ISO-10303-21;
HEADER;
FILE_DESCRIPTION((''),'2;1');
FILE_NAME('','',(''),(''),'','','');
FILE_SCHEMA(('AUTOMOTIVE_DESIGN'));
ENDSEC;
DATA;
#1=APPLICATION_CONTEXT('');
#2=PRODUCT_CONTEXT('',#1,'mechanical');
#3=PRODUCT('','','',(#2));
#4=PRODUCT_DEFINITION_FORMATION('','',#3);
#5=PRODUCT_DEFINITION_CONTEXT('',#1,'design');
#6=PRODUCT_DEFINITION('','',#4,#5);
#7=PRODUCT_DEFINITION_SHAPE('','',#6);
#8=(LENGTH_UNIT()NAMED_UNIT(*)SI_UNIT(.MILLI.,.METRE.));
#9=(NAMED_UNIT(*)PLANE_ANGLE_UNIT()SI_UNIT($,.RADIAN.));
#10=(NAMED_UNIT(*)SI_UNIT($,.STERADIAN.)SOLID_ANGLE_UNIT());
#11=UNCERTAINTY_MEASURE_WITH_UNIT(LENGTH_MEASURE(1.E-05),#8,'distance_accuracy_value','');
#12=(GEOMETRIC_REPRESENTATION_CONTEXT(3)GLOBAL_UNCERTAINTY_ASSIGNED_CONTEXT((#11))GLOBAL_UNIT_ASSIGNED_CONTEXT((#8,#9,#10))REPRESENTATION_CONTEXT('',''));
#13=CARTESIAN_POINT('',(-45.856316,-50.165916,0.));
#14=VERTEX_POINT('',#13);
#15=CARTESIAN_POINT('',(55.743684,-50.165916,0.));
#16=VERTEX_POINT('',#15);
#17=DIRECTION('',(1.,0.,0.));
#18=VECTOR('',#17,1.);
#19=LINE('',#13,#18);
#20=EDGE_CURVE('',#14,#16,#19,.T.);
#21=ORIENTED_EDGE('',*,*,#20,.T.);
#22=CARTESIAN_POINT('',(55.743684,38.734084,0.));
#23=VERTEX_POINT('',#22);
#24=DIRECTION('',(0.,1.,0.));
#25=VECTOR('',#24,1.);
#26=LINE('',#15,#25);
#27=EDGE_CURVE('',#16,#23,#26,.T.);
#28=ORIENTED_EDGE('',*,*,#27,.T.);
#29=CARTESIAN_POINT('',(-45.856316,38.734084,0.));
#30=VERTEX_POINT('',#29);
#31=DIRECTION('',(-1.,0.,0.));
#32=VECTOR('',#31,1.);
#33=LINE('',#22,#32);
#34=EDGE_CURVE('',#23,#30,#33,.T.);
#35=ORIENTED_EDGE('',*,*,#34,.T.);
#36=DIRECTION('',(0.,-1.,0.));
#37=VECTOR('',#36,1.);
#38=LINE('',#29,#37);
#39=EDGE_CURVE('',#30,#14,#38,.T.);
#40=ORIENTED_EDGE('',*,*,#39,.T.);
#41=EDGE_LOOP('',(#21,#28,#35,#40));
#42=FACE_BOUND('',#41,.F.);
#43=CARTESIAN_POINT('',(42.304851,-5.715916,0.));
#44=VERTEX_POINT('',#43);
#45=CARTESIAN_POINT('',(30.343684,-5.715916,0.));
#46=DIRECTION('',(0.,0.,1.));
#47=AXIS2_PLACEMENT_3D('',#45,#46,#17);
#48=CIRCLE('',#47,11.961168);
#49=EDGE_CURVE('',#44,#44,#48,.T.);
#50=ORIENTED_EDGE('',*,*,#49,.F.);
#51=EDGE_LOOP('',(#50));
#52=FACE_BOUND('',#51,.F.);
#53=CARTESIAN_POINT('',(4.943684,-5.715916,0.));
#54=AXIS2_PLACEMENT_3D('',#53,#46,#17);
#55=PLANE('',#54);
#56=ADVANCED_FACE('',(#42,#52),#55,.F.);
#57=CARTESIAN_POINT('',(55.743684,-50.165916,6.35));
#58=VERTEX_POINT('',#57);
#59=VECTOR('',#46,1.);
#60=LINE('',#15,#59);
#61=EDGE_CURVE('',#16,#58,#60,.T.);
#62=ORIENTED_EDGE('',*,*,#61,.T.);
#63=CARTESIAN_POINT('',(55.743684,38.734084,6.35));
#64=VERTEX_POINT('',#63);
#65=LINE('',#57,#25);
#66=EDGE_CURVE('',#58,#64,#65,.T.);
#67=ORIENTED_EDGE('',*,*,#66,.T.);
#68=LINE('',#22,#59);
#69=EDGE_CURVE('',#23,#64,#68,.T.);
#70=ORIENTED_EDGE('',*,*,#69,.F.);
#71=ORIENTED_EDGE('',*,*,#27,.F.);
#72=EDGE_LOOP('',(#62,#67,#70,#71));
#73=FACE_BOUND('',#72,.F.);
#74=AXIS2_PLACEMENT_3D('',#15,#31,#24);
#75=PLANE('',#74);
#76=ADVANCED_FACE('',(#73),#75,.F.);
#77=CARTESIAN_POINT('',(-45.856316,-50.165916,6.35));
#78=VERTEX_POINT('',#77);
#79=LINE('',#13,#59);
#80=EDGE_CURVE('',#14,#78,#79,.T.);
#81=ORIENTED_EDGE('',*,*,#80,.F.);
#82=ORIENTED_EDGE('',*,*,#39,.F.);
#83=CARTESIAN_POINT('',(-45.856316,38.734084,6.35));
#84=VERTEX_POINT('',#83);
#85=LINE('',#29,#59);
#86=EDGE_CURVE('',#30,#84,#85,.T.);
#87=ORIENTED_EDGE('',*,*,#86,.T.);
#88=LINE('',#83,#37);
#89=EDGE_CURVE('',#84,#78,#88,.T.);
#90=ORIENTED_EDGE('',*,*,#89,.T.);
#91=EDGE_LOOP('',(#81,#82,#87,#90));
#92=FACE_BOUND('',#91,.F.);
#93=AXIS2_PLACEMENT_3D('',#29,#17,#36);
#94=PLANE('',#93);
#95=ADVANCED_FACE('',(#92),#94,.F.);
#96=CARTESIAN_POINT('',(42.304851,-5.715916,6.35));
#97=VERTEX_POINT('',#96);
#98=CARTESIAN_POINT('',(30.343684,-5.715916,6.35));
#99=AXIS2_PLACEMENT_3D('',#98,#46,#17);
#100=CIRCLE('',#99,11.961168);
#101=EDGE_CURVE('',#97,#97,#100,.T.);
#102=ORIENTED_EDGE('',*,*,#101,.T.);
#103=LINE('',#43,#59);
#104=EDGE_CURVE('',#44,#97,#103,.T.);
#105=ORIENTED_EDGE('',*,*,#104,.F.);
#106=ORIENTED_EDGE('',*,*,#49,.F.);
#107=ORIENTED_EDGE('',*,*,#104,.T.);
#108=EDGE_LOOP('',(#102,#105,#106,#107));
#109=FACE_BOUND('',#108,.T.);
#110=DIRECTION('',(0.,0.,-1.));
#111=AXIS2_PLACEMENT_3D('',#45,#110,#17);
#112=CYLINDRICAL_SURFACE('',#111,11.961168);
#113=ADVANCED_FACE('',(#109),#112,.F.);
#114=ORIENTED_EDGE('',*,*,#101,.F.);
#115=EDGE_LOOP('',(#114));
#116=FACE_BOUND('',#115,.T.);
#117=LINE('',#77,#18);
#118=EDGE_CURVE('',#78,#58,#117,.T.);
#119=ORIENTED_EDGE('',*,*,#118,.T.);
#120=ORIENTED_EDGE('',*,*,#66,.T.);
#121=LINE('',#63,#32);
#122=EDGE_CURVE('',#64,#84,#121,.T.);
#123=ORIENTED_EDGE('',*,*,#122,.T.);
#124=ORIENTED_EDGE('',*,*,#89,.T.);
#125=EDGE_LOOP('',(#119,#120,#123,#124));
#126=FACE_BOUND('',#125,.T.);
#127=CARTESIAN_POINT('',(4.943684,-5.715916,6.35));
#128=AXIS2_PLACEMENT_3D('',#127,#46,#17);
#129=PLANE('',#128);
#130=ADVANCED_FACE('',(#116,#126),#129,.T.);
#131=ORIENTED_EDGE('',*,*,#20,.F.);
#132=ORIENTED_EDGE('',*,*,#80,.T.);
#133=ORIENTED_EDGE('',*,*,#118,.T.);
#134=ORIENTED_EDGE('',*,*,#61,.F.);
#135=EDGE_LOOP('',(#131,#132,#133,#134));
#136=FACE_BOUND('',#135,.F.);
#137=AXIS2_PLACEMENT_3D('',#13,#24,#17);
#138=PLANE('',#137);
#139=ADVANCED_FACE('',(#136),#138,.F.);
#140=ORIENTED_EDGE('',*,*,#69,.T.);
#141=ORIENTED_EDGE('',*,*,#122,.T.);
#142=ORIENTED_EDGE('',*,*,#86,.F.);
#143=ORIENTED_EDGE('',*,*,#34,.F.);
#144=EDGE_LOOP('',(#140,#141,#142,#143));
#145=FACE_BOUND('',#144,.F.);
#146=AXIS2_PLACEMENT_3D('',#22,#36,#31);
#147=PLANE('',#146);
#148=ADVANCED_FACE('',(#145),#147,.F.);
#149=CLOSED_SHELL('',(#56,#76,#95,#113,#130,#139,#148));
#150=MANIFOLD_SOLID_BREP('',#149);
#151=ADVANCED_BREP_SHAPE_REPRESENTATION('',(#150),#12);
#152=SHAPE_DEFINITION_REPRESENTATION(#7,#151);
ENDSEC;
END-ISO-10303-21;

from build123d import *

# Parameters (mm, degrees)
F0_R     = 11.9611676369
F1_DEPTH = 6.35


# Not quite as in the source:
# - a feature names something its author has since deleted; it is built from what else it names


with BuildPart() as f1:
    # F0 (on Top) → F1 (new body)
    with BuildSketch(Plane.XY):
        Polygon((4.9436837435, 38.7340840895), (-45.8563162565, 38.7340840895), (-45.8563162565, -50.1659159105), (55.7436837435, -50.1659159105), (55.7436837435, 38.7340840895), align=None)
        with Locations((30.3436837435, -5.7159159105)):
            Circle(F0_R, mode=Mode.SUBTRACT)
    extrude(amount=F1_DEPTH)


solid = f1.part
